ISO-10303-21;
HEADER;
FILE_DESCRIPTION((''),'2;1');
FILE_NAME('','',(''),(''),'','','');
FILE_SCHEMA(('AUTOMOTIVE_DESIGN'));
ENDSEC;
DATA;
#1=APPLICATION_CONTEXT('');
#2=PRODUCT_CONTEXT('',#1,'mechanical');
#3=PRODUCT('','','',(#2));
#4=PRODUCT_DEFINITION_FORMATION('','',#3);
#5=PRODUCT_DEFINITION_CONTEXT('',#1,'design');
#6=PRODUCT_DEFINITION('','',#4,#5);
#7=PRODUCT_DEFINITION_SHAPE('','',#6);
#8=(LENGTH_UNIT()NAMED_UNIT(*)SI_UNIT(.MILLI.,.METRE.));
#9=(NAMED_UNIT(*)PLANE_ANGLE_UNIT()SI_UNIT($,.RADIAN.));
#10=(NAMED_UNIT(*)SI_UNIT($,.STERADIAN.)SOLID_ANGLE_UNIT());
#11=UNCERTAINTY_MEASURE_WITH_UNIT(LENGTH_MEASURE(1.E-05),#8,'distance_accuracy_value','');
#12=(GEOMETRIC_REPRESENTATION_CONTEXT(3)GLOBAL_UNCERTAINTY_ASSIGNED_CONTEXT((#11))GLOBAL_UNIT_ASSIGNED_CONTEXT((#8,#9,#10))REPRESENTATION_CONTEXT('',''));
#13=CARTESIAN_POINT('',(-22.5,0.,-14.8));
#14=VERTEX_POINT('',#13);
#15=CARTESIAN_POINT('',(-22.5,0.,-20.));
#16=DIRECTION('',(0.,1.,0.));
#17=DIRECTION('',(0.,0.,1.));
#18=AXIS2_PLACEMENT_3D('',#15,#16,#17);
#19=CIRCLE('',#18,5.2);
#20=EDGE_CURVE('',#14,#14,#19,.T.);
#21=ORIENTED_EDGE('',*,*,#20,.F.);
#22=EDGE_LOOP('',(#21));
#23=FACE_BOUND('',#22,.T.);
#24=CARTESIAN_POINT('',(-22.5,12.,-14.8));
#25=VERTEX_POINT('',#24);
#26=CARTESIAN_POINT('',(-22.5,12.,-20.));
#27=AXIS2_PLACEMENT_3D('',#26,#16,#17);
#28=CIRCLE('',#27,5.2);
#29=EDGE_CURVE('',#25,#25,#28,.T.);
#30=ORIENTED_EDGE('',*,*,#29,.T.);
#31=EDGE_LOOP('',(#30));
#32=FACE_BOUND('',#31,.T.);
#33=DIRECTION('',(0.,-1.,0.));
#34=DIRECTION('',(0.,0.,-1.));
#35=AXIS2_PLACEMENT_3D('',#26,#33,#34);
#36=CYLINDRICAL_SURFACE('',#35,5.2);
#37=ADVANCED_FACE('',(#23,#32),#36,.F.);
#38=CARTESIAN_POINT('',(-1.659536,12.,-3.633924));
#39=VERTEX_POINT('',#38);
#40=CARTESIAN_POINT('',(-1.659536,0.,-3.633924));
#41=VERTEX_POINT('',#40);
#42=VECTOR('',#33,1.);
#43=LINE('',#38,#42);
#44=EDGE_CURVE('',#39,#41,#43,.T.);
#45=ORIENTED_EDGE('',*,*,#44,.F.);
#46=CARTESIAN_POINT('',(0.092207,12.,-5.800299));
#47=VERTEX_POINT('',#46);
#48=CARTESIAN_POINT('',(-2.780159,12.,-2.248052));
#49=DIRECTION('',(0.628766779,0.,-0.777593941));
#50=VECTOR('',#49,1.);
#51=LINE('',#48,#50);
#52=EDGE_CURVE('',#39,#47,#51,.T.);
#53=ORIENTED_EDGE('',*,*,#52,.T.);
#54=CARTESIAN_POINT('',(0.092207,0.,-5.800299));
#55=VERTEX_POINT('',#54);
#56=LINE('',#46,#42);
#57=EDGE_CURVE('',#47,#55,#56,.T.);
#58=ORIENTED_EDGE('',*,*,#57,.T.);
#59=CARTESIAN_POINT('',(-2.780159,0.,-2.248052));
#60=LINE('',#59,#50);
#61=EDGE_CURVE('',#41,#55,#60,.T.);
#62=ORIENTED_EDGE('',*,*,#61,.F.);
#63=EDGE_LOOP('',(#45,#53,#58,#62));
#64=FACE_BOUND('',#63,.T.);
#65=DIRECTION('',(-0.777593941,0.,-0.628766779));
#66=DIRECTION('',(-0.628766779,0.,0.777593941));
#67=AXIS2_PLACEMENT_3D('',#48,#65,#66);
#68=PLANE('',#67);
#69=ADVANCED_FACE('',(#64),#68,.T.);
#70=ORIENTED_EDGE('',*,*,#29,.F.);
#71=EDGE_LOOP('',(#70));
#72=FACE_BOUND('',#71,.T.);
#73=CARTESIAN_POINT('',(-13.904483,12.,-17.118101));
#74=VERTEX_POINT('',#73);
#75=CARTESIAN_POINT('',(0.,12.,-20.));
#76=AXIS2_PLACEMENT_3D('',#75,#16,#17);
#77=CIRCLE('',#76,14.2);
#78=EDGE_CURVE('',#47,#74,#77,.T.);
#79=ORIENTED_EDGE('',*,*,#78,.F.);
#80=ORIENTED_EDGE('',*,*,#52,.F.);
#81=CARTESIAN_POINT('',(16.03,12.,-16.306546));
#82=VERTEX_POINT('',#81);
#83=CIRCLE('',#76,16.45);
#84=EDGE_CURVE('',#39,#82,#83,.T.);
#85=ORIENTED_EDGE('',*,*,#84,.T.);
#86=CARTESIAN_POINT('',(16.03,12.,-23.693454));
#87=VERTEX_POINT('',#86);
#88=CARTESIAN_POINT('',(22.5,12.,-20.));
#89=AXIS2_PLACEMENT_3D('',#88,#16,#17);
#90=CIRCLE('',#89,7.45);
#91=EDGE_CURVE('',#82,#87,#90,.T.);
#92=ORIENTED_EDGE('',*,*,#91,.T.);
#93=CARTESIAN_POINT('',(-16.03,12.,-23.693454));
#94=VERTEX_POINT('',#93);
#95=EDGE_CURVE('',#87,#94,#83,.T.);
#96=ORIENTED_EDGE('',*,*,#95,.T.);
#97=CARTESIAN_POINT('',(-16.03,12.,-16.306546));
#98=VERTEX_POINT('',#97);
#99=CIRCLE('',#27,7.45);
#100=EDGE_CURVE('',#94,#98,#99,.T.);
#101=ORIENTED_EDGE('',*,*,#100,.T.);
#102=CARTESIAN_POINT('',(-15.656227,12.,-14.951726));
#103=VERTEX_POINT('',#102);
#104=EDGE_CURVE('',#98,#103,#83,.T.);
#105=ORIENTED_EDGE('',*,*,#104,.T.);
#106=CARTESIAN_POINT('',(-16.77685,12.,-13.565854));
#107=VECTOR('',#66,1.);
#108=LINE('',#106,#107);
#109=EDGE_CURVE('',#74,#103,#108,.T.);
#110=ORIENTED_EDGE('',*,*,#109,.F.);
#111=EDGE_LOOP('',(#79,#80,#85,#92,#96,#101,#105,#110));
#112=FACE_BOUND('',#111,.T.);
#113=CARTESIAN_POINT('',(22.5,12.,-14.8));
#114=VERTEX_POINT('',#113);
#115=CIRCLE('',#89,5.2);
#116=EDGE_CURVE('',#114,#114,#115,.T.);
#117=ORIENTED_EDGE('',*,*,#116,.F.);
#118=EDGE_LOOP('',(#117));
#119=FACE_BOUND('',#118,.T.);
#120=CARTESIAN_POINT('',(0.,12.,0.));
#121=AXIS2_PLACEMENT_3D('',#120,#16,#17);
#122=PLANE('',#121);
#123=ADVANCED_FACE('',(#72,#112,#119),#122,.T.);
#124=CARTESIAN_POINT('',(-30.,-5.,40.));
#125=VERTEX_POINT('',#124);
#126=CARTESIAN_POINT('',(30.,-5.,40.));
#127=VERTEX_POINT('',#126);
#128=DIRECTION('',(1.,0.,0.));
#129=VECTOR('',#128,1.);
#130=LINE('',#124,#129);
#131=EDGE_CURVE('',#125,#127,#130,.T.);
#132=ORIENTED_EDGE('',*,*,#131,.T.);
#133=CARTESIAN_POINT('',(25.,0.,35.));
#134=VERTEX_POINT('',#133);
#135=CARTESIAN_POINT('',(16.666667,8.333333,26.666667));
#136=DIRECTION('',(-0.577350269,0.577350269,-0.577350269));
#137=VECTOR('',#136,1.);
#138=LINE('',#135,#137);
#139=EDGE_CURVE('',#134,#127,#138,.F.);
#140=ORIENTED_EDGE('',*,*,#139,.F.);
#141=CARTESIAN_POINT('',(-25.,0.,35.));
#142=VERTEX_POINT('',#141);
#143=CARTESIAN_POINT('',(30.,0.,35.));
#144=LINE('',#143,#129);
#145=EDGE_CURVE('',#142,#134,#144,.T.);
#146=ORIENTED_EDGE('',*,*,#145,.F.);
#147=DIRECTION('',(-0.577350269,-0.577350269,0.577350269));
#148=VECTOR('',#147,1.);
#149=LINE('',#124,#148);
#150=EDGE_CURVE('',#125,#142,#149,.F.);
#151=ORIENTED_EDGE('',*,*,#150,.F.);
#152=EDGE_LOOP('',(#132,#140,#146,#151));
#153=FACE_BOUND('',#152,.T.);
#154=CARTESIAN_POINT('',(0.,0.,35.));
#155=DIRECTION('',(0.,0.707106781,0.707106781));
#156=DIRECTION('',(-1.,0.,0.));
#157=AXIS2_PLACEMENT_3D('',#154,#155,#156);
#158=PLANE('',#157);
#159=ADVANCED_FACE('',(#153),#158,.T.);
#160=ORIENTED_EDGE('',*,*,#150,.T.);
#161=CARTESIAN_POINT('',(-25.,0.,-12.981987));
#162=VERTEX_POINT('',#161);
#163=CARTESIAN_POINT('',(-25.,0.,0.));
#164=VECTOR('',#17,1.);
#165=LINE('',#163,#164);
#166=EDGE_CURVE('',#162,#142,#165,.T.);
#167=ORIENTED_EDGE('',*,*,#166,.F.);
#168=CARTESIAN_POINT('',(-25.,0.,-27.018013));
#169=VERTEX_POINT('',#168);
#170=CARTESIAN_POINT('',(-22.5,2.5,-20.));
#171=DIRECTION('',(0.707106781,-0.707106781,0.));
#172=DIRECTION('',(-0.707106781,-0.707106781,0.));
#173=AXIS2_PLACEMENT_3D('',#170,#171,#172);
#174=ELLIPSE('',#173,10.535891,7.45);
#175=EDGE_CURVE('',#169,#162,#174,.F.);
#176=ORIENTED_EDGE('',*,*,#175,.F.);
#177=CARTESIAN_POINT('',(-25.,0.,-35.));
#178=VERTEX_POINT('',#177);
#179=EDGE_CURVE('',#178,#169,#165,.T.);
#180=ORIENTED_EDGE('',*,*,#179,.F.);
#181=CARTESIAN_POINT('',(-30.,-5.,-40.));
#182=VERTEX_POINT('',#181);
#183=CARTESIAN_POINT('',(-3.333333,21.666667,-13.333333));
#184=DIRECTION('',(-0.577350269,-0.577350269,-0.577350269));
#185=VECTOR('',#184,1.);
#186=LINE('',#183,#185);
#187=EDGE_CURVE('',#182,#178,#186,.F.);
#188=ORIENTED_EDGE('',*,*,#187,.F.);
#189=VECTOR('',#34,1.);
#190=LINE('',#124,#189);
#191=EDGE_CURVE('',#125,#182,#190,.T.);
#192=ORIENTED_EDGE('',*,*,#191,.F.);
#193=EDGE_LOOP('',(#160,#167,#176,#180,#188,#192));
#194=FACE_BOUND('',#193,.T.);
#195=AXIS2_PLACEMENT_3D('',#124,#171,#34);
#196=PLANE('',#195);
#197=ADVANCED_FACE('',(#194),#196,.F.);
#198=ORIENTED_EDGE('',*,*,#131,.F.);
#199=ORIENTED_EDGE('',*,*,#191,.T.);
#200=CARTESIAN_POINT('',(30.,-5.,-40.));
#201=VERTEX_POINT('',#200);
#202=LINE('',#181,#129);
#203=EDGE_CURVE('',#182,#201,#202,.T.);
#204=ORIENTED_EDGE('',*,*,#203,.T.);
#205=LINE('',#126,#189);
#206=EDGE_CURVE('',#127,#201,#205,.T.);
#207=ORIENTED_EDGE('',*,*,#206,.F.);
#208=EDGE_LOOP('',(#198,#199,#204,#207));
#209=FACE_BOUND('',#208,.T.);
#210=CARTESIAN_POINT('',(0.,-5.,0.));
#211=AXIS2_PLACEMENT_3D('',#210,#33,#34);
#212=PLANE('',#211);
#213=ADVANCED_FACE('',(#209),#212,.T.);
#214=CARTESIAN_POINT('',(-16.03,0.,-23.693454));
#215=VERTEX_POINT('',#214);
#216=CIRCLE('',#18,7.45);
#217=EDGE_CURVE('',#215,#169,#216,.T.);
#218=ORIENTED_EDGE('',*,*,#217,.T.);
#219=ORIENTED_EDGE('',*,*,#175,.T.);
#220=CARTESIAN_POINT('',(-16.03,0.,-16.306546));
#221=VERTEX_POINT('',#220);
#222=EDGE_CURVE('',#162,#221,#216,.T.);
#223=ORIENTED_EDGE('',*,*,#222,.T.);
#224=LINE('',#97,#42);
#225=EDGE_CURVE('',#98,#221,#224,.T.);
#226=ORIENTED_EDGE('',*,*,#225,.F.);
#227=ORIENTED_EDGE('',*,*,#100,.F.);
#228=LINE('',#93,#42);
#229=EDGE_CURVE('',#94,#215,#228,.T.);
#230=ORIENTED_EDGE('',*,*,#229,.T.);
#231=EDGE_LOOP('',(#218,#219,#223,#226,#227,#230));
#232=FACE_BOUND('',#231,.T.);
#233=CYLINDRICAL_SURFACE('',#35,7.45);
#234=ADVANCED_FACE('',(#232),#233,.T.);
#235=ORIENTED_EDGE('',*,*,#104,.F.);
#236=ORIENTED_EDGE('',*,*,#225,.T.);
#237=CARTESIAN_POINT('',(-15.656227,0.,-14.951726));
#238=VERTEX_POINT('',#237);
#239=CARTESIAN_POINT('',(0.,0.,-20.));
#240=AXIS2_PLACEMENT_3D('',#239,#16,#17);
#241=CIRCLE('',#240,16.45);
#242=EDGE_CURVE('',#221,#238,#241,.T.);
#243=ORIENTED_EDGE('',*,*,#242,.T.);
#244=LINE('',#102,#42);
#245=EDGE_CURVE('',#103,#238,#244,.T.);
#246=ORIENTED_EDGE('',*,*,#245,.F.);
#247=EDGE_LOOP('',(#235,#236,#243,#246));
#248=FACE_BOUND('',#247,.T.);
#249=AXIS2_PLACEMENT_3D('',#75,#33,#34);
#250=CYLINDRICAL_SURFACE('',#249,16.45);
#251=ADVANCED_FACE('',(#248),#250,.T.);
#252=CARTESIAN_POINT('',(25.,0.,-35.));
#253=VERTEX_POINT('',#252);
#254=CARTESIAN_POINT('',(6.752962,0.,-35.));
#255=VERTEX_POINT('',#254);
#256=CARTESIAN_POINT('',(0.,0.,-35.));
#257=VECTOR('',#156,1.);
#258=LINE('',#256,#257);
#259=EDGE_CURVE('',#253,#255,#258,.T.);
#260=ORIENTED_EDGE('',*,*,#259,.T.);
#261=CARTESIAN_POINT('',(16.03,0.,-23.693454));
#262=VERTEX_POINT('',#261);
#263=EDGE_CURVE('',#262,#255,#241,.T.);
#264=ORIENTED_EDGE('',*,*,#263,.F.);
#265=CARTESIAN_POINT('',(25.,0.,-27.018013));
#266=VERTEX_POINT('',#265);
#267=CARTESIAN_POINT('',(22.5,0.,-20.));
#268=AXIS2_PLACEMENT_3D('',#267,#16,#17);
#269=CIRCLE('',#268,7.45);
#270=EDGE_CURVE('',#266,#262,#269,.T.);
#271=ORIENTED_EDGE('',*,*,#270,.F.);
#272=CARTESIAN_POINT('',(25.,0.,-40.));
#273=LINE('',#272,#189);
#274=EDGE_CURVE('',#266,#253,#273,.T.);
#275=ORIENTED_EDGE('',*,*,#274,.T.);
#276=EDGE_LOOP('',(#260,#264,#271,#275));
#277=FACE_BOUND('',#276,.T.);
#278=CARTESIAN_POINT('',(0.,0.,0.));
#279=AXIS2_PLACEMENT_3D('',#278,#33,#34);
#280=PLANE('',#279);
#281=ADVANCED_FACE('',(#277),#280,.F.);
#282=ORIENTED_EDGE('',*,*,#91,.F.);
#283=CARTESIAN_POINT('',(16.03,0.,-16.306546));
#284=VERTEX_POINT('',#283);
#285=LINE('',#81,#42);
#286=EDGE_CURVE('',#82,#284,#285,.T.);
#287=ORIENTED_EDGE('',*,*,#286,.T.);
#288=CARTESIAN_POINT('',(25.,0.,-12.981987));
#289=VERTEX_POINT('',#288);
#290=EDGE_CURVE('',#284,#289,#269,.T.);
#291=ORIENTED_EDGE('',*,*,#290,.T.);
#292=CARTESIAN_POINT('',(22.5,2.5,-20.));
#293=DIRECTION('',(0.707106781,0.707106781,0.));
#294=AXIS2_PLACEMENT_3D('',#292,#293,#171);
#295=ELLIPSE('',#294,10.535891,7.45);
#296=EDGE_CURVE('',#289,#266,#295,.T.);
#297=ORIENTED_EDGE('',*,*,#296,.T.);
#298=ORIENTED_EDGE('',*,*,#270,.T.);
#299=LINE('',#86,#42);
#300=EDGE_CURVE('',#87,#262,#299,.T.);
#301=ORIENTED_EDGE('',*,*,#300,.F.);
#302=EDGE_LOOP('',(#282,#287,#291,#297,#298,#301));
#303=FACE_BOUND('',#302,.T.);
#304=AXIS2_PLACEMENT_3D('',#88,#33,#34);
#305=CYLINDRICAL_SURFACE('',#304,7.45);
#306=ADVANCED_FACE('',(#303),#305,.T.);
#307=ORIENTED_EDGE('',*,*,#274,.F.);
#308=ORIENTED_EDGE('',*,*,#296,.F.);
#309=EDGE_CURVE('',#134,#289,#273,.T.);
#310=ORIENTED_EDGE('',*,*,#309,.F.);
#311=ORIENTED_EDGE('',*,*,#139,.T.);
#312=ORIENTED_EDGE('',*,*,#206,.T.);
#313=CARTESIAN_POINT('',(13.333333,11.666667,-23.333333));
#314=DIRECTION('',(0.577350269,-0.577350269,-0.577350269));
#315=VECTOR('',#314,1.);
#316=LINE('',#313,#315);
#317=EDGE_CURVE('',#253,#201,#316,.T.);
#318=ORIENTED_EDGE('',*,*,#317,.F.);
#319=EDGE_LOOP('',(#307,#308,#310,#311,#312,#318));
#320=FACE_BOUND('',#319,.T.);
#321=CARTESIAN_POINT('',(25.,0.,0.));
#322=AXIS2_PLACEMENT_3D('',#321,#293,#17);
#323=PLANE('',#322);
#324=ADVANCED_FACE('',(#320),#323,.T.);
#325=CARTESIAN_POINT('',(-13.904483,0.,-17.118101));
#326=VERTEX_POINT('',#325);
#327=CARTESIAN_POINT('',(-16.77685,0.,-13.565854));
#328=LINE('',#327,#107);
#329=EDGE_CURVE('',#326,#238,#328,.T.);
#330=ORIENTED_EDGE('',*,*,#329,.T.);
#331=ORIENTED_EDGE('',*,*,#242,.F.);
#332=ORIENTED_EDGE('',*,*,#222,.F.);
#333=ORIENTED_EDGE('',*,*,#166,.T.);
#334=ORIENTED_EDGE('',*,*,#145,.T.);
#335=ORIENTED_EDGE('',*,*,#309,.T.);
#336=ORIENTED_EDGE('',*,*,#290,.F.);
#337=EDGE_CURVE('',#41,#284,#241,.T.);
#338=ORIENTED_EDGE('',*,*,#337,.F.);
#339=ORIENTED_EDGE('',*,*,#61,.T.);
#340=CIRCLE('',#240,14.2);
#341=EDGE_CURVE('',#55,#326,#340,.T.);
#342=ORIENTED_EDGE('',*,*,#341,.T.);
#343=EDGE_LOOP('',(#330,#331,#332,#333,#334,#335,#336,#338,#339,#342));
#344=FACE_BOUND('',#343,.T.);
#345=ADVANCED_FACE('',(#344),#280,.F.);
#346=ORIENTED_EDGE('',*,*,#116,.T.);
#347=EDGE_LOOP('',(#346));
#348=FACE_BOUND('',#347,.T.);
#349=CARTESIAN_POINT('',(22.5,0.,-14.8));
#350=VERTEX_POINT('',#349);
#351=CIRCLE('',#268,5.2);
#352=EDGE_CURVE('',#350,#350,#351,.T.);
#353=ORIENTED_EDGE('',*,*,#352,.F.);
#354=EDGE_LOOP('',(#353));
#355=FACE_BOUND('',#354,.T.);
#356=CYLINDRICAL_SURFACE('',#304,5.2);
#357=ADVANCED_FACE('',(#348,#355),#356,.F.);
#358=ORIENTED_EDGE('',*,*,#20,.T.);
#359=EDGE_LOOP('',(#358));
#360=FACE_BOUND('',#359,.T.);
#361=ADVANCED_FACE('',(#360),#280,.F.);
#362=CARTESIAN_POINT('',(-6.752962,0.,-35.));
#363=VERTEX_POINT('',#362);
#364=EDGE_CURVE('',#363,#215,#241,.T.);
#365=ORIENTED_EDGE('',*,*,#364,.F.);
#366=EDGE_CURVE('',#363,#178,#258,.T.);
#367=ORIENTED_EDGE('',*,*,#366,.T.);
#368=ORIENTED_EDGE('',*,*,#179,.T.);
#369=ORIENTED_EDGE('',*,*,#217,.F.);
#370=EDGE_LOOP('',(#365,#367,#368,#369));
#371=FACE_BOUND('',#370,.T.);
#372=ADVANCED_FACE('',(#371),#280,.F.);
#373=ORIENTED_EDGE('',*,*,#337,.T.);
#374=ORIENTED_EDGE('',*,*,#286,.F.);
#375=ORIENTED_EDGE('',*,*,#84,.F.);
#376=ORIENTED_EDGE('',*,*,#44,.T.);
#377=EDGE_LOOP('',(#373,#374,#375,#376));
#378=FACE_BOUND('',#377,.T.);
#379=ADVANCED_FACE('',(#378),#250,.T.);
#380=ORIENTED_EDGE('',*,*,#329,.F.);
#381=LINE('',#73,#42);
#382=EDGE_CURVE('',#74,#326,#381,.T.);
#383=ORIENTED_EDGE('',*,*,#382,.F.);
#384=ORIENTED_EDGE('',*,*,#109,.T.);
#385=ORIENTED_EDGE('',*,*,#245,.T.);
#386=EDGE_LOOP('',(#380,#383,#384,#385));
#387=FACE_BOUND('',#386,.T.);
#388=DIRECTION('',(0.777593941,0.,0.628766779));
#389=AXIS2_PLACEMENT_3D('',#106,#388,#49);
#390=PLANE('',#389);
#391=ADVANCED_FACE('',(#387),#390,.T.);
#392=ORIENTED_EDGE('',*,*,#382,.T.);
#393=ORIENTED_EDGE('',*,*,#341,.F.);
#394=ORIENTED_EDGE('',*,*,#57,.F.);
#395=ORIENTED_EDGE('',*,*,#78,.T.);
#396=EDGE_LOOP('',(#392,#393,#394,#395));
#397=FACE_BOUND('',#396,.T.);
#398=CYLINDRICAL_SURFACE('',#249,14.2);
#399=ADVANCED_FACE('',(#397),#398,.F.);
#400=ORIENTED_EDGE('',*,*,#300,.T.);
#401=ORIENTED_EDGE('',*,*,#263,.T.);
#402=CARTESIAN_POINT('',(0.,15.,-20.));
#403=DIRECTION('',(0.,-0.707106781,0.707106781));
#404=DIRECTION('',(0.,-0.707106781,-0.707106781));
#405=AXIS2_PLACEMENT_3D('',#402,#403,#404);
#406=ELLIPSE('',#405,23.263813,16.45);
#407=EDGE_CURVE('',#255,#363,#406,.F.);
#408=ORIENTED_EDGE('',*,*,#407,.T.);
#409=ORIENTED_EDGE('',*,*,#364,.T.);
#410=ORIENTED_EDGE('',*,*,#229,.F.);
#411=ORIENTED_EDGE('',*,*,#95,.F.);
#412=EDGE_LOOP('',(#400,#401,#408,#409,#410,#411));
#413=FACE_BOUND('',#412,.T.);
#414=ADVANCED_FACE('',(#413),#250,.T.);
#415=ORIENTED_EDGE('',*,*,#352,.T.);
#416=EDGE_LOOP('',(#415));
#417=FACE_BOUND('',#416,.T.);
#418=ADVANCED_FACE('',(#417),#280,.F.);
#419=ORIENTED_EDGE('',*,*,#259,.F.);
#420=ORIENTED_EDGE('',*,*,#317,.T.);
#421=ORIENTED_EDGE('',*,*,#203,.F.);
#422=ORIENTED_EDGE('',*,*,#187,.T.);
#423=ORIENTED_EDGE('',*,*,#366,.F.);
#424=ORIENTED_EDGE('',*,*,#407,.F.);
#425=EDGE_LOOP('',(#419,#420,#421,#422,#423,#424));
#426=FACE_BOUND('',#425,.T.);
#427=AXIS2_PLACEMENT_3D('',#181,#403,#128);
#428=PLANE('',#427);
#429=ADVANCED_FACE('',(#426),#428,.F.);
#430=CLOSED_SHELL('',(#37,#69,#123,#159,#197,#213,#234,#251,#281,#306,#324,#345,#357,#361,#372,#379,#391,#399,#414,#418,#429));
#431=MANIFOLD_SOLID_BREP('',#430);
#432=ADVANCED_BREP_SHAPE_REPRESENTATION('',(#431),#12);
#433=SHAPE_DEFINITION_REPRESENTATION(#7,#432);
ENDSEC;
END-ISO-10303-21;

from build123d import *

# Parameters (mm, degrees)
SKETCH1_W           = 60
SKETCH1_H           = 80
BOSS_EXTRUDE2_DEPTH = 5
SKETCH1_7_R         = 5.2
BOSS_EXTRUDE4_DEPTH = 12
CHAMFER1_SIZE       = 5


with BuildPart() as part:
    # Sketch1 → Boss-Extrude2 (new body)
    with BuildSketch(Plane(origin=(0, 0, 0), x_dir=(1, 0, 0), z_dir=(0, 1, 0))):
        Rectangle(SKETCH1_W, SKETCH1_H)
    extrude(amount=-BOSS_EXTRUDE2_DEPTH)

    # Sketch1<7> → Boss-Extrude4 (add)
    with BuildSketch(Plane(origin=(0, 0, 0), x_dir=(1, 0, 0), z_dir=(0, 1, 0))):
        with BuildLine():
            Line((-15.656226575, 14.951726095), (-13.904483467, 17.118101406))
            ThreePointArc((-13.904483467, 17.118101406), (8.928488267, 31.041833963), (0.092207471, 5.800299377))
            Line((0.092207471, 5.800299377), (-1.659535637, 3.633924066))
            ThreePointArc((-1.659535637, 3.633924066), (9.580000014, 6.627412377), (16.03, 16.306546332))
            ThreePointArc((16.03, 16.306546332), (29.95, 20), (16.03, 23.693453668))
            ThreePointArc((16.03, 23.693453668), (0, 36.45), (-16.03, 23.693453668))
            ThreePointArc((-16.03, 23.693453668), (-29.95, 20), (-16.03, 16.306546332))
            ThreePointArc((-16.03, 16.306546332), (-15.857588818, 15.625142644), (-15.656226575, 14.951726095))
        make_face()
        with Locations(Location((-22.5, 20, 0), (0, 0, 270))):
            Circle(SKETCH1_7_R, mode=Mode.SUBTRACT)
        with Locations(Location((22.5, 20, 0), (0, 0, 270))):
            Circle(SKETCH1_7_R, mode=Mode.SUBTRACT)
    extrude(amount=BOSS_EXTRUDE4_DEPTH)

    # Chamfer1
    # the kernel refuses this chamfer: 5 mm, written as the material it takes off along each edge
    with BuildSketch(Plane(origin=(42.85841494, 0, -40), x_dir=(0, 0.027495876610586372, 0.9996219169112968), z_dir=(-1, 0, 0))) as chamfer1_piece_1_section:
        Polygon((CHAMFER1_SIZE * 0.999621916911, -CHAMFER1_SIZE * 0.0274958766106), (-CHAMFER1_SIZE * 0.0274958766106, -CHAMFER1_SIZE * 0.999621916911), (0, 0), align=None)
    chamfer1_piece_1 = extrude(amount=85.71682988, mode=Mode.PRIVATE)
    chamfer1_piece_1 = chamfer1_piece_1 - Plane(origin=(0, -1.679599763, -20), x_dir=(0.9744680851063817, 0, -0.22452605886422566), z_dir=(0, -1, 0)) * Cylinder(16.45, 192, mode=Mode.PRIVATE)
    add(chamfer1_piece_1, mode=Mode.SUBTRACT)
    with BuildSketch(Plane(origin=(30, 0, 52.85841494), x_dir=(0.027495876610586317, -0.9996219169112968, 0), z_dir=(0, 0, -1))) as chamfer1_piece_2_section:
        Polygon((CHAMFER1_SIZE * 0.999621916911, CHAMFER1_SIZE * 0.0274958766106), (-CHAMFER1_SIZE * 0.0274958766106, CHAMFER1_SIZE * 0.999621916911), (0, 0), align=None)
    chamfer1_piece_2 = extrude(amount=105.71682988, mode=Mode.PRIVATE)
    chamfer1_piece_2 = chamfer1_piece_2 - Plane(origin=(22.5, -1.692858266, -20), x_dir=(-0.8684563758389187, 0, 0.49576559306261964), z_dir=(0, -1, 0)) * Cylinder(7.45, 232, mode=Mode.PRIVATE)
    add(chamfer1_piece_2, mode=Mode.SUBTRACT)
    with BuildSketch(Plane(origin=(-42.85841494, 0, 40), x_dir=(0, -0.9996219169112968, 0.027495876610586317), z_dir=(1, 0, 0))) as chamfer1_piece_3:
        Polygon((CHAMFER1_SIZE * 0.999621916911, CHAMFER1_SIZE * 0.0274958766106), (-CHAMFER1_SIZE * 0.0274958766106, CHAMFER1_SIZE * 0.999621916911), (0, 0), align=None)
    extrude(amount=85.71682988, mode=Mode.SUBTRACT)
    with BuildSketch(Plane(origin=(-30, 0, -52.85841494), x_dir=(-0.027495876610586317, -0.9996219169112968, 0), z_dir=(0, 0, 1))) as chamfer1_piece_4_section:
        Polygon((CHAMFER1_SIZE * 0.999621916911, CHAMFER1_SIZE * 0.0274958766106), (-CHAMFER1_SIZE * 0.0274958766106, CHAMFER1_SIZE * 0.999621916911), (0, 0), align=None)
    chamfer1_piece_4 = extrude(amount=105.71682988, mode=Mode.PRIVATE)
    chamfer1_piece_4 = chamfer1_piece_4 - Plane(origin=(-22.5, -1.692858266, -20), x_dir=(0.8684563758389191, 0, -0.4957655930626189), z_dir=(0, -1, 0)) * Cylinder(7.45, 232, mode=Mode.PRIVATE)
    add(chamfer1_piece_4, mode=Mode.SUBTRACT)


solid = part.part
